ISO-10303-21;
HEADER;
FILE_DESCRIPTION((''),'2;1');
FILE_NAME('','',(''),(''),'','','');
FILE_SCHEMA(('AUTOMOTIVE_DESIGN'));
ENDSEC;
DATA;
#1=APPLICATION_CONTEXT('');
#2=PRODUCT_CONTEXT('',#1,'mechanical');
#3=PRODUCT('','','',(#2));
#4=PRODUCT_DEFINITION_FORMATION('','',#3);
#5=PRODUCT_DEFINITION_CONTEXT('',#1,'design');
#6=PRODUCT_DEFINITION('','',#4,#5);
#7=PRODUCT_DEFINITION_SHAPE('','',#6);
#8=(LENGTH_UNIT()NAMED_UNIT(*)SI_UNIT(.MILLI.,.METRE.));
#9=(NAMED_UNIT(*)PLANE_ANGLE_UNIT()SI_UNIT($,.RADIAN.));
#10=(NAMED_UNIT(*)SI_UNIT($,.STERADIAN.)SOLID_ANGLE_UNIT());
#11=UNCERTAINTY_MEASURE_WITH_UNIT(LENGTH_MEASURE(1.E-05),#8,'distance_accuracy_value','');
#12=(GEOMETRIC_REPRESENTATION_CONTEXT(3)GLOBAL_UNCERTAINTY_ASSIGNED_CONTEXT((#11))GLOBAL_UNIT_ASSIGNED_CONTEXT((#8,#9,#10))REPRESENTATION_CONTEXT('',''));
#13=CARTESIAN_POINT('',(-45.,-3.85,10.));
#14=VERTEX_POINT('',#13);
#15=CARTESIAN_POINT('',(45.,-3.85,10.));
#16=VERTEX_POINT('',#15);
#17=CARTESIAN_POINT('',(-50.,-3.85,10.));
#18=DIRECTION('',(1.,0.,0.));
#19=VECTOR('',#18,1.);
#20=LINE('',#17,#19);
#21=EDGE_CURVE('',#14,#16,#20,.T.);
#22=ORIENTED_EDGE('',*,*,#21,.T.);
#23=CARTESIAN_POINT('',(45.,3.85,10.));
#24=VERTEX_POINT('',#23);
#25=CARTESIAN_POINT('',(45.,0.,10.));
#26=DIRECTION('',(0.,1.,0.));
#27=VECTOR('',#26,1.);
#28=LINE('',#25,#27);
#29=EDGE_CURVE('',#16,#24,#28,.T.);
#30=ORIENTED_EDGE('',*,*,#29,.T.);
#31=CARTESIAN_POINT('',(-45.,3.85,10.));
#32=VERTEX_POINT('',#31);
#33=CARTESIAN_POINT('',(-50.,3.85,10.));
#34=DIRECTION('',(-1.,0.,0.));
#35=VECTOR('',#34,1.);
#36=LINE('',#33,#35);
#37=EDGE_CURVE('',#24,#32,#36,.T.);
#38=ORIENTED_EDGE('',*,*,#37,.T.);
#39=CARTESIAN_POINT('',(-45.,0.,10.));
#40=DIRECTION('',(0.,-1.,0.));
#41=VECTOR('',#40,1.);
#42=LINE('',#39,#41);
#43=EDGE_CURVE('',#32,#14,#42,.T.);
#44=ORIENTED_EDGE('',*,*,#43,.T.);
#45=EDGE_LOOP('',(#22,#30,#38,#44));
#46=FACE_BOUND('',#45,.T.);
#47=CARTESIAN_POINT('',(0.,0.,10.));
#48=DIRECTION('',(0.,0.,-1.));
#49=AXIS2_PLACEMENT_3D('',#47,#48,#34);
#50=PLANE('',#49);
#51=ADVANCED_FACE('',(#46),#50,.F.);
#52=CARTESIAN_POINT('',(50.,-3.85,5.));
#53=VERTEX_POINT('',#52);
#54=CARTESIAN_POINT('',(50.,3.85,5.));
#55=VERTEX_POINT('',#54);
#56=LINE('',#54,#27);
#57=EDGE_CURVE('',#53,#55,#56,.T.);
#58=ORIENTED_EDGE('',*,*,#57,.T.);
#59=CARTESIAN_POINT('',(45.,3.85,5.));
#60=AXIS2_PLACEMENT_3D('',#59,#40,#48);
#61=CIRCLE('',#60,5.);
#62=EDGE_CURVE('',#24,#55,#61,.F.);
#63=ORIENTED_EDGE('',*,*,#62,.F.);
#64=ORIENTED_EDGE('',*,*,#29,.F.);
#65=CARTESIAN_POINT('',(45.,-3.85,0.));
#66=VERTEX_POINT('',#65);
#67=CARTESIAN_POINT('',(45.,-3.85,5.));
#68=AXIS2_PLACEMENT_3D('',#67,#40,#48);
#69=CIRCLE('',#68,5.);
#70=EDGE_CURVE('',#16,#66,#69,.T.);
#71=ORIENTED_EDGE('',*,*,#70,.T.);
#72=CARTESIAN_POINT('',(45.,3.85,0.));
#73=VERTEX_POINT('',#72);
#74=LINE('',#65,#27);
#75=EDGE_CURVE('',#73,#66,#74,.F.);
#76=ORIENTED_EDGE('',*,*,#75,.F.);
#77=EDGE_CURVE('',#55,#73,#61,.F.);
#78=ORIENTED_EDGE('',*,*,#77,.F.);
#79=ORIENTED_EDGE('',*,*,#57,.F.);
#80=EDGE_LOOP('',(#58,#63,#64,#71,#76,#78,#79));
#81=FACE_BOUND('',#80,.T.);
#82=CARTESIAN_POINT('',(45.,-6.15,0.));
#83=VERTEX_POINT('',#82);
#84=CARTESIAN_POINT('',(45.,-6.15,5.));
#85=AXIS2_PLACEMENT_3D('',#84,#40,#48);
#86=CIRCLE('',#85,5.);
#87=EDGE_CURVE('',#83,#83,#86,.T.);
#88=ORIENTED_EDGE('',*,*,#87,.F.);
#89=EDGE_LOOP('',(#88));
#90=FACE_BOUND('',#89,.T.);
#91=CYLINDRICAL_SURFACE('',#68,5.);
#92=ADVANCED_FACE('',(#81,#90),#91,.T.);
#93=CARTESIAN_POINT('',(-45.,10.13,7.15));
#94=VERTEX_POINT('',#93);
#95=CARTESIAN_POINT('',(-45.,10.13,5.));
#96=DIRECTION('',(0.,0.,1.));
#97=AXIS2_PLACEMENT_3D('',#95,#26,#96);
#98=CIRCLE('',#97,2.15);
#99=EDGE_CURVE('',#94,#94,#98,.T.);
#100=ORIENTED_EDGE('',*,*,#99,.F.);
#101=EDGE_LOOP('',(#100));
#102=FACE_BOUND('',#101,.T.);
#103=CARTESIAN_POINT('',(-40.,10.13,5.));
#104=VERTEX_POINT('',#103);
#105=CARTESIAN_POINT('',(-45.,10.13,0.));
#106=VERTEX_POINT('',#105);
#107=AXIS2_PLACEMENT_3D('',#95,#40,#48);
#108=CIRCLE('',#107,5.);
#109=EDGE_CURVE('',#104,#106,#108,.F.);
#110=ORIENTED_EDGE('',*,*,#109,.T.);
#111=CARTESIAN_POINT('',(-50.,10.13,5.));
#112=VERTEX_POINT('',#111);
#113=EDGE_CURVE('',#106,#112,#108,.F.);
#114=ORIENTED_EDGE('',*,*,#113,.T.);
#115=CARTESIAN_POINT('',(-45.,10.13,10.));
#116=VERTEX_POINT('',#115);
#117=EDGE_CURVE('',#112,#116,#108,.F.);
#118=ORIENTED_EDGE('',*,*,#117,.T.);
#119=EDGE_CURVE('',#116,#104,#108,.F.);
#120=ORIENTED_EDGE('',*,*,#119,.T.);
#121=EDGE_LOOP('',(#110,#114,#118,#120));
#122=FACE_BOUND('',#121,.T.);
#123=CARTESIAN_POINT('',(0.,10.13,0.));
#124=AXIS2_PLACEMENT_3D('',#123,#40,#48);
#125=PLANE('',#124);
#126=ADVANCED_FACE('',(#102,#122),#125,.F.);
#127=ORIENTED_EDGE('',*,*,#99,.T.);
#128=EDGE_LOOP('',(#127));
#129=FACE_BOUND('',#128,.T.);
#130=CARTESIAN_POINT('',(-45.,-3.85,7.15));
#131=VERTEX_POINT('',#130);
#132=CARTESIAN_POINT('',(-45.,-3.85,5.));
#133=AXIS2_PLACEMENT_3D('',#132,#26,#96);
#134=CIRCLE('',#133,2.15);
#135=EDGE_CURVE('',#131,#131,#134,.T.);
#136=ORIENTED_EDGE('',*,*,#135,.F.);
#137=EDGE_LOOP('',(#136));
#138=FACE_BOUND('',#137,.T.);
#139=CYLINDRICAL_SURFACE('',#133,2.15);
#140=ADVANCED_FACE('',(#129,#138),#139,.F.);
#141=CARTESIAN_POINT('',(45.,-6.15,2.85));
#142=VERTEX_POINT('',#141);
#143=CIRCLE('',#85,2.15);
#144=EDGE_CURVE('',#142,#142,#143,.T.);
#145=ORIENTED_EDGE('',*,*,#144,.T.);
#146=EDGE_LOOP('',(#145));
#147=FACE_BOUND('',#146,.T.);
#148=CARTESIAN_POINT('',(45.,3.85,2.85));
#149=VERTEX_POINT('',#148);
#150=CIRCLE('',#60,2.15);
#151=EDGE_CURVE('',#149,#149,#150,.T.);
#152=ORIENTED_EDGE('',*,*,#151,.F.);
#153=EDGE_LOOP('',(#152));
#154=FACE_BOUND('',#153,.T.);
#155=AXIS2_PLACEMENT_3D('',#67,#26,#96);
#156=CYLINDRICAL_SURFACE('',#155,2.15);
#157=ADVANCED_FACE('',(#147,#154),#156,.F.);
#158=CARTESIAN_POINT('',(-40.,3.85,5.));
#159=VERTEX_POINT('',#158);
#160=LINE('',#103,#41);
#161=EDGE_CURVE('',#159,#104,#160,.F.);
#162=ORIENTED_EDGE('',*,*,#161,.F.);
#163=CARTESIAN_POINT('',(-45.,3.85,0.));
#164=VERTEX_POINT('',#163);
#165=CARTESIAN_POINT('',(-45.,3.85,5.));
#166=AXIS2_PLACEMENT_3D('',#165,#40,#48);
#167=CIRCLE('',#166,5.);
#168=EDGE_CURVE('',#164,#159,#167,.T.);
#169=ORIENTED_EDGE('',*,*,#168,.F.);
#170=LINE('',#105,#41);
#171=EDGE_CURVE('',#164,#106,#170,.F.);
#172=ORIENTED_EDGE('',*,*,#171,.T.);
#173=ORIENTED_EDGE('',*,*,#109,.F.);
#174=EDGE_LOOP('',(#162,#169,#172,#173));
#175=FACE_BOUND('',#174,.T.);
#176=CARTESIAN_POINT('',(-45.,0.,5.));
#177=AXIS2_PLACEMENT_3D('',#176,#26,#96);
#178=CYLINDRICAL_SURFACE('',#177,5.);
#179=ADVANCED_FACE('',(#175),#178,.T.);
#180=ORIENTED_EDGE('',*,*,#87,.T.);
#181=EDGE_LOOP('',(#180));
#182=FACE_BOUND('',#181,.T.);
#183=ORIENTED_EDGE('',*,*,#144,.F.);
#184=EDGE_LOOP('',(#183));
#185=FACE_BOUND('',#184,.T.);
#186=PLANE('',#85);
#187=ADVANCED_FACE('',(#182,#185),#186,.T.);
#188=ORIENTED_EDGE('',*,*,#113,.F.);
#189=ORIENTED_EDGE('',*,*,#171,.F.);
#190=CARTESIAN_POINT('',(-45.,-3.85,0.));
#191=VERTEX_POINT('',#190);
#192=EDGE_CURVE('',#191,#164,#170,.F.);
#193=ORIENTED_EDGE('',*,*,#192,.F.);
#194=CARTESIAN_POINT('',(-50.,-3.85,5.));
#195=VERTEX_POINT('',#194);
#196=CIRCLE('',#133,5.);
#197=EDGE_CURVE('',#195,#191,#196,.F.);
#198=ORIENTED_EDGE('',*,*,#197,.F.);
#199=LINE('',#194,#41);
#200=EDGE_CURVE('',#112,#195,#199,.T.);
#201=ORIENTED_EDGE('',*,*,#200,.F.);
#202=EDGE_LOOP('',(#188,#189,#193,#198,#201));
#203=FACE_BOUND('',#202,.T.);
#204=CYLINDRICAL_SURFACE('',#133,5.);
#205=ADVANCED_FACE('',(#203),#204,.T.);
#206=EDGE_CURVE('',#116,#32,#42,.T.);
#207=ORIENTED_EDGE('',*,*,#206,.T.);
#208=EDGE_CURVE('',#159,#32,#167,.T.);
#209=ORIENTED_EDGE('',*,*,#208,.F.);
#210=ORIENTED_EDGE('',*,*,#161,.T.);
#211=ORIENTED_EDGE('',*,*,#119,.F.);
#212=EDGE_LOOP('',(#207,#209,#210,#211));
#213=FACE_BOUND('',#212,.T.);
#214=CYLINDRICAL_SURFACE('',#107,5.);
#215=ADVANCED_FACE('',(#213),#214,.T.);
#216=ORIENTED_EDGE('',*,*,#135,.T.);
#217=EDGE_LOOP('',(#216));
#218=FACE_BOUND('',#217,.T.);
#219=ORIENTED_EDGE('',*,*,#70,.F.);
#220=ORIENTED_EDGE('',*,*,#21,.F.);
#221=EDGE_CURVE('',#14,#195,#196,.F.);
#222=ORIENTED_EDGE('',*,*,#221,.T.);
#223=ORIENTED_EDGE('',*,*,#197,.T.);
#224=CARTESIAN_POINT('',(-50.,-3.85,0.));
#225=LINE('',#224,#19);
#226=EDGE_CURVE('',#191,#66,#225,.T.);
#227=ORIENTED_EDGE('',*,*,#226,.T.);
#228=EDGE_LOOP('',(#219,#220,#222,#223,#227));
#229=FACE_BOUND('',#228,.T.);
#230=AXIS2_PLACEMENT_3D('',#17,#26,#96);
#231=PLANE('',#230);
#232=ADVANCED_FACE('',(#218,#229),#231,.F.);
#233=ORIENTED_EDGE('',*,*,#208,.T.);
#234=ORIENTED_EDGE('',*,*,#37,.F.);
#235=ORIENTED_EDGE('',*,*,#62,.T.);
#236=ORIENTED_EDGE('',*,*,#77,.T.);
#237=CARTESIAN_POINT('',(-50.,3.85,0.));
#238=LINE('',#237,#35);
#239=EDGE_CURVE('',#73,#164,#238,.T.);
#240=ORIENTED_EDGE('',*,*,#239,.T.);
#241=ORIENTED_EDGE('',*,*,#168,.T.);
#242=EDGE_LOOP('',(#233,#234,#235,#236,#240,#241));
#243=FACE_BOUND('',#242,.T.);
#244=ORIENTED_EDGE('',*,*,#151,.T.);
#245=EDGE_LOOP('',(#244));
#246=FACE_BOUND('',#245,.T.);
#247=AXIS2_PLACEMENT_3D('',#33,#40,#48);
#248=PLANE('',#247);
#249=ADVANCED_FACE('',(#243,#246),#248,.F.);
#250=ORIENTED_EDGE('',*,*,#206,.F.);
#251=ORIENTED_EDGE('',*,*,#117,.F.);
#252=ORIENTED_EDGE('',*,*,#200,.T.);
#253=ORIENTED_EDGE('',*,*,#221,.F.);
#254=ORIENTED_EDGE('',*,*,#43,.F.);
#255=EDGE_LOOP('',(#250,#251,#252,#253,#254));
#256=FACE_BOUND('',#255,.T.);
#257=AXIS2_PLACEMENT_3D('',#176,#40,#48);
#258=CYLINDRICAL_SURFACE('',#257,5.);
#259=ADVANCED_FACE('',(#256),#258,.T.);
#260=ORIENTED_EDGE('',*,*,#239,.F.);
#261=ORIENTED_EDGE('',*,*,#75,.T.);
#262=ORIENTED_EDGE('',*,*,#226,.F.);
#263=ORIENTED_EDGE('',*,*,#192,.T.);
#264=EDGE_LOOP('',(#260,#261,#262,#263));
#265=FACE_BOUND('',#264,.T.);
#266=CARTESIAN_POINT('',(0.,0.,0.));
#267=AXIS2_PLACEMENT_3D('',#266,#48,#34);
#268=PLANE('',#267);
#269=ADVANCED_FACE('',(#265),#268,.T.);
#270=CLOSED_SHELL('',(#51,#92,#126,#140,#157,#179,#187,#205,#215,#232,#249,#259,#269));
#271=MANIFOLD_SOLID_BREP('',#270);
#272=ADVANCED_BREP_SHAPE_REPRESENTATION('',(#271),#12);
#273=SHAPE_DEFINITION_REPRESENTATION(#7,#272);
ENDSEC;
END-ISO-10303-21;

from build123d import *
from build123d.topology import SkipClean

# Parameters (mm, degrees)
SKETCH_1_W          = 100
SKETCH_1_H          = 7.7
EXTRUDE_1_DEPTH     = 10
SKETCH_4_W          = 10
SKETCH_4_H          = 10
EXTRUDE_2_DEPTH     = 6.28
FILLET_1_R          = 5
SKETCH_2_R          = 2.15
CUT_EXTRUDE_1_DEPTH = 53.871924497
SKETCH_5_R          = 5
SKETCH_5_R_2        = 2.15
EXTRUDE_3_DEPTH     = 2.3


with BuildPart() as part:
    # 스케치1 → 보스-돌출1 (new body)
    with BuildSketch(Plane.XY):
        Rectangle(SKETCH_1_W, SKETCH_1_H)
    extrude(amount=EXTRUDE_1_DEPTH)

    # 스케치4 → 보스-돌출2 (add)
    with BuildSketch(Plane(origin=(0, 3.85, 0), x_dir=(1, 0, 0), z_dir=(0, 1, 0))):
        with Locations((-45, -5)):
            Rectangle(SKETCH_4_W, SKETCH_4_H)
    extrude(amount=EXTRUDE_2_DEPTH)

    # 필렛1
    fillet_1_edges = [part.edges().sort_by_distance(p)[0] for p in [
        (50, 0, 0),
        (50, 0, 10),
        (-50, 3.14, 0),
        (-50, 3.14, 10),
        (-40, 6.99, 10),
        (-40, 6.99, 0),
    ]]
    fillet(fillet_1_edges, radius=FILLET_1_R - 0.0001)  # a hair under: the kernel refuses the full size

    # 스케치2 → 컷-돌출1 (cut, through all)
    with BuildSketch(Plane(origin=(0, 10.13, 0), x_dir=(1, 0, 0), z_dir=(0, 1, 0))):
        with Locations(Location((-45, -5, 0), (0, 0, 270))):
            Circle(SKETCH_2_R)
        with Locations(Location((45, -5, 0), (0, 0, 270))):
            Circle(SKETCH_2_R)
    extrude(amount=-CUT_EXTRUDE_1_DEPTH, mode=Mode.SUBTRACT)

    # 스케치5 → 보스-돌출3 (add)
    with SkipClean():  # the faces are left unmerged after this step: merging them gives an invalid solid
        with BuildSketch(Plane.XZ.offset(3.85)):
            with Locations(Location((45, 5, 0), (0, 0, 270))):
                Circle(SKETCH_5_R)
            with Locations(Location((45, 5, 0), (0, 0, 270))):
                Circle(SKETCH_5_R_2, mode=Mode.SUBTRACT)
        extrude(amount=EXTRUDE_3_DEPTH)


solid = part.part
